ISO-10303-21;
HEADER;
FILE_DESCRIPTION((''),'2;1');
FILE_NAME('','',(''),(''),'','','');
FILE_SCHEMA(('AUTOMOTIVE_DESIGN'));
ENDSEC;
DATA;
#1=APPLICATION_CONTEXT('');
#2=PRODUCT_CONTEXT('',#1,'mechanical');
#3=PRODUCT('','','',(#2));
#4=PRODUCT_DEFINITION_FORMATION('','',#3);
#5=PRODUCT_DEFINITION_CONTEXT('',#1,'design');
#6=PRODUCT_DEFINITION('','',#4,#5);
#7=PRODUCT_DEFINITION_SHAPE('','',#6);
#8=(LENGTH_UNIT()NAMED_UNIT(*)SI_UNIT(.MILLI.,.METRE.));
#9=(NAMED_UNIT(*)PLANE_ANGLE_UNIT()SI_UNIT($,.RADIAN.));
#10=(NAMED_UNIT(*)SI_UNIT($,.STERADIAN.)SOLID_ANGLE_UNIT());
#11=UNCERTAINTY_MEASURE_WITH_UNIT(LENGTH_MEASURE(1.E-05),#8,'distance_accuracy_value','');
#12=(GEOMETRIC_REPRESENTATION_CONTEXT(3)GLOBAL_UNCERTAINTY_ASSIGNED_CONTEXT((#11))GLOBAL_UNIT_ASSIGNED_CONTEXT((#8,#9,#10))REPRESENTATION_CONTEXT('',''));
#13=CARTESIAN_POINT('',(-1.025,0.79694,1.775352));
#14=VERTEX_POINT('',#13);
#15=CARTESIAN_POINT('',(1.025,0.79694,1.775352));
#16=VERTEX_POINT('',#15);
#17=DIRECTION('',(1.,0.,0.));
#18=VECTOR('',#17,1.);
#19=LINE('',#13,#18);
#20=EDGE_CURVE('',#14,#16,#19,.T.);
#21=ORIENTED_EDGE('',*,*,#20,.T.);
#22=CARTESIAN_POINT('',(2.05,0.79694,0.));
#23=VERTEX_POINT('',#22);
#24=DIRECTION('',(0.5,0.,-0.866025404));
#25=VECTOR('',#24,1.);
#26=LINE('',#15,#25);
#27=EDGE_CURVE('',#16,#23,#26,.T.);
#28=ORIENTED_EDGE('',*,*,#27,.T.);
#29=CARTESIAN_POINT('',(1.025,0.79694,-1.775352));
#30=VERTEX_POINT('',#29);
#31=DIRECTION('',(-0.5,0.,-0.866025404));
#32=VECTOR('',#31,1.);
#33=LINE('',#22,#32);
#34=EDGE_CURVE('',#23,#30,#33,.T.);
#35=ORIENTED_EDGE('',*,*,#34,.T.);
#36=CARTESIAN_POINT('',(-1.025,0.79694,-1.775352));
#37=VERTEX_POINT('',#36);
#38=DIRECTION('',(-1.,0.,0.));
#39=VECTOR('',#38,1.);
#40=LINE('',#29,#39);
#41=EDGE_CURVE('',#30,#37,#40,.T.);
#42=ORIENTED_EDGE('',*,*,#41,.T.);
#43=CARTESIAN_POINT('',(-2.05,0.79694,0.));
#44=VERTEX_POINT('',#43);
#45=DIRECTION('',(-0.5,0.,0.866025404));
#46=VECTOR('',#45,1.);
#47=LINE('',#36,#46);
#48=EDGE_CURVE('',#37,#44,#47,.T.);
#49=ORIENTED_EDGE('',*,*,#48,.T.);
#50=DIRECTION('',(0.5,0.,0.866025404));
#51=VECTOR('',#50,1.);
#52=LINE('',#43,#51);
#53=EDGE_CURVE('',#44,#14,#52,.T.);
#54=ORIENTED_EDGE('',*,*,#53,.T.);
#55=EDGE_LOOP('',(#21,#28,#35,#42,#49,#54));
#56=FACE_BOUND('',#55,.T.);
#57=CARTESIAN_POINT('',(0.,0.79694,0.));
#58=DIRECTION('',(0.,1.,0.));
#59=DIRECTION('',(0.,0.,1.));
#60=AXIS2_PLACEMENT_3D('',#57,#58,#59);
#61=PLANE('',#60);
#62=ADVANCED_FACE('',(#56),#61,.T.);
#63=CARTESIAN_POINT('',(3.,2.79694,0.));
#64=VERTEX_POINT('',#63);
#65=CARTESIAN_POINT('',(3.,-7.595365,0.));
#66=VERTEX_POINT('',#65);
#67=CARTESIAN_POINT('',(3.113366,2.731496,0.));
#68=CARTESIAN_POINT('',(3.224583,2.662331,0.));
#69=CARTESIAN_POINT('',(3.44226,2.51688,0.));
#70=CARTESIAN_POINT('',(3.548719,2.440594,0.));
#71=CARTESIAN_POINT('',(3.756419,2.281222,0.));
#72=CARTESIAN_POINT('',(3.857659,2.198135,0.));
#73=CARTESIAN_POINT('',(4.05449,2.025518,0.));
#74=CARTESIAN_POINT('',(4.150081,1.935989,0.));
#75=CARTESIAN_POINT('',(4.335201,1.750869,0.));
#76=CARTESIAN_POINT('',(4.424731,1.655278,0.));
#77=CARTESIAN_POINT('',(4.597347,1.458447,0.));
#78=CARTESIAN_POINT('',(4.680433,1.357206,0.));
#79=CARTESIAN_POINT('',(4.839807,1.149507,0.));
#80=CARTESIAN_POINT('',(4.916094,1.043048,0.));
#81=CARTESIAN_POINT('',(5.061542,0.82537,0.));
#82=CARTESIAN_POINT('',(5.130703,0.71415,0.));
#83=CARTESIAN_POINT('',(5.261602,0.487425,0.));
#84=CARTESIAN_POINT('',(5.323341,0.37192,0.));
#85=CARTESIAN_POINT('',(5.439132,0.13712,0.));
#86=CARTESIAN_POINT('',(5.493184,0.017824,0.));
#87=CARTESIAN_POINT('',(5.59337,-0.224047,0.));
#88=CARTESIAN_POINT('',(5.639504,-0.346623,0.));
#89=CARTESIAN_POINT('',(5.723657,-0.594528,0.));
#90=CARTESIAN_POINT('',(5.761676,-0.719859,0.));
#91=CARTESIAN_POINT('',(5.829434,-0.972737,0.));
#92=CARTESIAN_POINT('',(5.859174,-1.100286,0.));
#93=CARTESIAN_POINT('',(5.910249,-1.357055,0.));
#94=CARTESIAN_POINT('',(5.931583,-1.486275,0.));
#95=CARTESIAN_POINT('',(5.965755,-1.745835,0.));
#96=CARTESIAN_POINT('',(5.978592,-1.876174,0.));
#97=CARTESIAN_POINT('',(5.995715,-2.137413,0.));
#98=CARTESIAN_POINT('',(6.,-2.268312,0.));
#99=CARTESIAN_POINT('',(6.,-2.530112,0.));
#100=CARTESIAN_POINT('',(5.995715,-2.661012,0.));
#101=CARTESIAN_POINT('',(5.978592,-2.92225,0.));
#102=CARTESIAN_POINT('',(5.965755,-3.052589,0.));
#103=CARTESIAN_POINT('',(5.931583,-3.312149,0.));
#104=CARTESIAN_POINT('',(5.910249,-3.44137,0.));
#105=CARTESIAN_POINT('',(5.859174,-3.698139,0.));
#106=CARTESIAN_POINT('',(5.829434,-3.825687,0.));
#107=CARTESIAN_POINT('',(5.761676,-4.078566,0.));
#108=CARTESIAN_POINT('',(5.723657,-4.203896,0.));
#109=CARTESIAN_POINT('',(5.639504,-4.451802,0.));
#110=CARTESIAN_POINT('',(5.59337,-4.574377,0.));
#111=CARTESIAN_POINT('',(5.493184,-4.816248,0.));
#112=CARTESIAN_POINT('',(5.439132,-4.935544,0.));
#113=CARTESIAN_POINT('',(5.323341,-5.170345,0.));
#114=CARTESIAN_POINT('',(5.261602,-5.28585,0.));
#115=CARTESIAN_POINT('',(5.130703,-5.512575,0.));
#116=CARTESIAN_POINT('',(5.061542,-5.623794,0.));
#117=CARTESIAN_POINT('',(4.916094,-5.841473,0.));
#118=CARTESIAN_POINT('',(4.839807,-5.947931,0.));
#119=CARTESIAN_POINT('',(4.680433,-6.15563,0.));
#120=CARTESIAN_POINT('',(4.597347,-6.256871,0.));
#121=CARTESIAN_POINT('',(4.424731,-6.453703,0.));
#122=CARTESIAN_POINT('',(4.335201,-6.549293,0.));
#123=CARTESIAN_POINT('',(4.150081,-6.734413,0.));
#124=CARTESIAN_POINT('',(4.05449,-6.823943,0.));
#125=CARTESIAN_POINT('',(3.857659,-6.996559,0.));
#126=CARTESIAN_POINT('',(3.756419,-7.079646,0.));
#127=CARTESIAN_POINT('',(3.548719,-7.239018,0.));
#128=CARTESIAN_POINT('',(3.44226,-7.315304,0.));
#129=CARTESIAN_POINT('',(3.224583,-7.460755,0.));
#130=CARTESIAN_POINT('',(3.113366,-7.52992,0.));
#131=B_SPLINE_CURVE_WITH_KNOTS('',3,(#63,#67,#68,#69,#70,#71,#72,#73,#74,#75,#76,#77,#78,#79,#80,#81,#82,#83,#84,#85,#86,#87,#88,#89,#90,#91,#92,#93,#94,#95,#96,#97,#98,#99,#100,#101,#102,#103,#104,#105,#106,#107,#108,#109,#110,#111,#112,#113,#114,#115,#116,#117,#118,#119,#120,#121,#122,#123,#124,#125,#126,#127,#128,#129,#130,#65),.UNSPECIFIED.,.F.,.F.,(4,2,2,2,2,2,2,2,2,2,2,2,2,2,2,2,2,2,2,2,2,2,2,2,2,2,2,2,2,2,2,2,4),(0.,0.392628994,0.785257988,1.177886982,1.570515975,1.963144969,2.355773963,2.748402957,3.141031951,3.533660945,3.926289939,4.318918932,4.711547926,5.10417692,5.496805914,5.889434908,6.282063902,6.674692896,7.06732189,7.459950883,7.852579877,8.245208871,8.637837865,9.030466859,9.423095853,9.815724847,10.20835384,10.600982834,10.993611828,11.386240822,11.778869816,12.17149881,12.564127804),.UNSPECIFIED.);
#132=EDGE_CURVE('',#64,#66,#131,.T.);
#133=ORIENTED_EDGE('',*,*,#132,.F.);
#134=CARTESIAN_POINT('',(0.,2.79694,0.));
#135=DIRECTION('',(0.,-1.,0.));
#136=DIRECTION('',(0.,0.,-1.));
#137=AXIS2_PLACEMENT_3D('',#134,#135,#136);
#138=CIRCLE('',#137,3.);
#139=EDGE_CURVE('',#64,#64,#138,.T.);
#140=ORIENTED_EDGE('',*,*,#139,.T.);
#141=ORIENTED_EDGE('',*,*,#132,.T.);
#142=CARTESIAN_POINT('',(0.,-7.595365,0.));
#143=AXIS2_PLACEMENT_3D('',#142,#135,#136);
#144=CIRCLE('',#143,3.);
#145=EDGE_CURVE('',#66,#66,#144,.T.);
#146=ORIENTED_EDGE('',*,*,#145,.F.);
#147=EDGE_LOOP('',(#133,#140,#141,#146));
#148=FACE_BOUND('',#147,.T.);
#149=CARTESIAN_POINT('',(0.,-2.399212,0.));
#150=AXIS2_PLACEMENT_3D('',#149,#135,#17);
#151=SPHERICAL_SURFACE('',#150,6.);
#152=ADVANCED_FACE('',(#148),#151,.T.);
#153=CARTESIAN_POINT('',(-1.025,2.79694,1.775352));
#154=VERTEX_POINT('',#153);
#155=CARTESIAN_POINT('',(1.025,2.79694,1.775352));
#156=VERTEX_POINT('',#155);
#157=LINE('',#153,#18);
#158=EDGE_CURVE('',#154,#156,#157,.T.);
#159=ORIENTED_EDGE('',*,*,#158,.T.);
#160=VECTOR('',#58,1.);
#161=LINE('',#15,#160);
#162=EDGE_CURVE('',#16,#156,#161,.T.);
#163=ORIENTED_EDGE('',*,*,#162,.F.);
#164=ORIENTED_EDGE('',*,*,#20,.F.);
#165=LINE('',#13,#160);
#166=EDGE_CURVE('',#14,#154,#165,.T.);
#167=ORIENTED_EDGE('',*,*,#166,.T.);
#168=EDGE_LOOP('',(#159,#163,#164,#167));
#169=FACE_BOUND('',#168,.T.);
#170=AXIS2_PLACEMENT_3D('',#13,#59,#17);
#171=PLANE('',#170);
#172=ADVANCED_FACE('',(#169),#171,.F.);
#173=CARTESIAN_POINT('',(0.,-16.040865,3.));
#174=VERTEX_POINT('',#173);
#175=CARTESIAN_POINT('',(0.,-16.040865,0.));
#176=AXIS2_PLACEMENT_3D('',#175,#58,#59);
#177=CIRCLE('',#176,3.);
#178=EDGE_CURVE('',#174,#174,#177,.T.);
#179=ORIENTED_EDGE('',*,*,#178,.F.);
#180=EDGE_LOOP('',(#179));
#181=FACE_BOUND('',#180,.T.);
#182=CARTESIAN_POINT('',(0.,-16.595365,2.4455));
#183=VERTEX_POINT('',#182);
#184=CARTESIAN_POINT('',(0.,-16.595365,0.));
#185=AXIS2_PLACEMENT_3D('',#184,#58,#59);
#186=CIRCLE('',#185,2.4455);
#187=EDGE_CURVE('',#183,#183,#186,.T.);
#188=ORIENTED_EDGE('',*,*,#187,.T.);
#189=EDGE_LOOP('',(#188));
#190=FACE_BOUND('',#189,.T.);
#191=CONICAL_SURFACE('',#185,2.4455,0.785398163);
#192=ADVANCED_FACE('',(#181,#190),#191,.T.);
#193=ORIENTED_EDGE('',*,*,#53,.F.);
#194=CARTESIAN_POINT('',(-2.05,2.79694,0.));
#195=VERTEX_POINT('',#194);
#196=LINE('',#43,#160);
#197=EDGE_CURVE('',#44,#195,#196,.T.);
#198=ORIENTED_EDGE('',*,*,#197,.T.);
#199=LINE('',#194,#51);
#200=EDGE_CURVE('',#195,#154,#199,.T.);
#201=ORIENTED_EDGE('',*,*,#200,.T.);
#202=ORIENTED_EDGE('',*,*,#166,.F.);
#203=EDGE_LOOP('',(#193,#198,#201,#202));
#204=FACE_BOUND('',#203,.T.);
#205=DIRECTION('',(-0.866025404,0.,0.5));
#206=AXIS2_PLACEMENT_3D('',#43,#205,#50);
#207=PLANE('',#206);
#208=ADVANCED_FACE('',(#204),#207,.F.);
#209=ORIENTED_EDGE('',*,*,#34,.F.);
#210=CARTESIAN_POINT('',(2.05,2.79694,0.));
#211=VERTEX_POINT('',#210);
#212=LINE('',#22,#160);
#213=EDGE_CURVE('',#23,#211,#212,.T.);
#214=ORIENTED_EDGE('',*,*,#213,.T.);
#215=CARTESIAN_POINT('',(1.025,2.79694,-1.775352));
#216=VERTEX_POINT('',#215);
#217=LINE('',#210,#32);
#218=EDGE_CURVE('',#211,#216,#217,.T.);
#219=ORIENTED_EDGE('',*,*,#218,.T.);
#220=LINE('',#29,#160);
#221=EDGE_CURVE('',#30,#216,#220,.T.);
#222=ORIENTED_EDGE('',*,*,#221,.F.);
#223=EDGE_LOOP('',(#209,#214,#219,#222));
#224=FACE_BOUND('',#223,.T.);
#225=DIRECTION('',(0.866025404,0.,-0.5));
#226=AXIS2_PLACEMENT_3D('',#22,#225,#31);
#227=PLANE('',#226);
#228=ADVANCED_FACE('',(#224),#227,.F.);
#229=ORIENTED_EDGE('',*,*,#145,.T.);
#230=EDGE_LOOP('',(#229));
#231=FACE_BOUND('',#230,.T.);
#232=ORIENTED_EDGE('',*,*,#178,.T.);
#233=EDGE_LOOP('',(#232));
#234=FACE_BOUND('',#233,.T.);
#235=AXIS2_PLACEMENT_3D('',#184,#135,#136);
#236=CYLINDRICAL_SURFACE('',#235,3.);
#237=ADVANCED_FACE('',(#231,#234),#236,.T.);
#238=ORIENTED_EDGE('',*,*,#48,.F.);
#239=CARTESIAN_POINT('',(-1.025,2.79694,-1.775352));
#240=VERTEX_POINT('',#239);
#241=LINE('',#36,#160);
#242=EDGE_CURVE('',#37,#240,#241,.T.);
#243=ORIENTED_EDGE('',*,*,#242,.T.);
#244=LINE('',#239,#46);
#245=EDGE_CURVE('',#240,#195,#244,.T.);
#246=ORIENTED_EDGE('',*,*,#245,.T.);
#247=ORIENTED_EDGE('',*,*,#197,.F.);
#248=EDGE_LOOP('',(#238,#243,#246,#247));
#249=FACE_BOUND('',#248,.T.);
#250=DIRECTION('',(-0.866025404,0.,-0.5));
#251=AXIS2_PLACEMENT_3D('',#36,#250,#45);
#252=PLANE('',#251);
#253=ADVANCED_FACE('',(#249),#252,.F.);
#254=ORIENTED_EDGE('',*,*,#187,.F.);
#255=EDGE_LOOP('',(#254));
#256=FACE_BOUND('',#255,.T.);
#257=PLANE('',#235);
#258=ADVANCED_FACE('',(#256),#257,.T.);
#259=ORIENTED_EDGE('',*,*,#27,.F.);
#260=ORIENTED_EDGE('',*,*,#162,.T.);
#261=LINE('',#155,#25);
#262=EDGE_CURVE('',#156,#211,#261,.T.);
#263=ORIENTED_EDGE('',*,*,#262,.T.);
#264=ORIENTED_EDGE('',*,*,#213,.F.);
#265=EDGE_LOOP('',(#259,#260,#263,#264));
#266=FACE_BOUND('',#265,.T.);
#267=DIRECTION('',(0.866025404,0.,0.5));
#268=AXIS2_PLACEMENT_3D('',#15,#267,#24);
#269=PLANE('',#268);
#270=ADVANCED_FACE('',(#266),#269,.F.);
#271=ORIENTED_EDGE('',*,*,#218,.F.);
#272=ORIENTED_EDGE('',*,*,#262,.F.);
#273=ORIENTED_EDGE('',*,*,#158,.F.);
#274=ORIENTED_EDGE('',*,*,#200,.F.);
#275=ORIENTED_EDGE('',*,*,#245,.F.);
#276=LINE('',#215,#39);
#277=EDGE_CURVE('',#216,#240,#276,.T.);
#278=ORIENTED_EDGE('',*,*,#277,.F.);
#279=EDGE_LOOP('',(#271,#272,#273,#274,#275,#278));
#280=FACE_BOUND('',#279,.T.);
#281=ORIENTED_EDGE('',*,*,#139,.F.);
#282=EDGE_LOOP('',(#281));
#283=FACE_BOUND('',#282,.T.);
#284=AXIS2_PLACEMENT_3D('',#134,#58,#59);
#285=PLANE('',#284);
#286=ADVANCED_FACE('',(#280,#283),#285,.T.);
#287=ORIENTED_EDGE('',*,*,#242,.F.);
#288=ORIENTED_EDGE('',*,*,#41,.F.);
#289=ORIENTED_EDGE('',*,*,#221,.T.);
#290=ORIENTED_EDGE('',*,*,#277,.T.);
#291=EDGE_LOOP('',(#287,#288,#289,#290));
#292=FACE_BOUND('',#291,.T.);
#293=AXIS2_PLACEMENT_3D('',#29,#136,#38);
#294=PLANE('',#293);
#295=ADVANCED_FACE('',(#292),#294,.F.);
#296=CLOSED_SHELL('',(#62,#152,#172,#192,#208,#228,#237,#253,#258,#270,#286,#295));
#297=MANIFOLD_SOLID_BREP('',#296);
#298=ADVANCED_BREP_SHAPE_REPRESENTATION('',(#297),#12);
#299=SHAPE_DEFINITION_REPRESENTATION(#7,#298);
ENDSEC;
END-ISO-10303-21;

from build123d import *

# Parameters (mm, degrees)
CUT_EXTRUDE1_DEPTH = 2


# Read off the part's stored shape, not the designer's step: M6x1.0 Machine Threads Stud1
with BuildPart() as part:
    # Sketch1 → Revolve1 (revolve)
    with BuildSketch(Plane.XY, mode=Mode.PRIVATE) as revolve1_sk:
        with BuildLine():
            Line((0, -16.59536458), (0, 2.796940265))
            Line((0, 2.796940265), (3, 2.796940265))
            ThreePointArc((3, 2.796940265), (6, -2.399212157), (3, -7.59536458))
            Line((3, -7.59536458), (3, -16.59536458))
            Line((3, -16.59536458), (0, -16.59536458))
        make_face()
    revolve(revolve1_sk.sketch.rotate(Axis((0, -16.59536458, 0), (0, 1, 0)), 90), axis=Axis((0, -16.59536458, 0), (0, 1, 0)))

    # Sketch4 → Cut-Extrude1 (cut)
    with BuildSketch(Plane(origin=(0, 2.796940265, 0), x_dir=(1, 0, 0), z_dir=(0, 1, 0))):
        Polygon((-2.05, 0), (-1.025, -1.775352078), (1.025, -1.775352078), (2.05, 0), (1.025, 1.775352078), (-1.025, 1.775352078), align=None)
    extrude(amount=-CUT_EXTRUDE1_DEPTH, mode=Mode.SUBTRACT)

    # M6x1.0 Machine Threads Stud1 outline → M6x1.0 Machine Threads Stud1 (revolve, cut)
    with BuildSketch(Plane.XY):
        Polygon((3, -16.04086458), (2.4455, -16.59536458), (3, -16.59536458), align=None)
    revolve(axis=Axis((0, 0, 0), (0, 1, 0)), mode=Mode.SUBTRACT)


solid = part.part
